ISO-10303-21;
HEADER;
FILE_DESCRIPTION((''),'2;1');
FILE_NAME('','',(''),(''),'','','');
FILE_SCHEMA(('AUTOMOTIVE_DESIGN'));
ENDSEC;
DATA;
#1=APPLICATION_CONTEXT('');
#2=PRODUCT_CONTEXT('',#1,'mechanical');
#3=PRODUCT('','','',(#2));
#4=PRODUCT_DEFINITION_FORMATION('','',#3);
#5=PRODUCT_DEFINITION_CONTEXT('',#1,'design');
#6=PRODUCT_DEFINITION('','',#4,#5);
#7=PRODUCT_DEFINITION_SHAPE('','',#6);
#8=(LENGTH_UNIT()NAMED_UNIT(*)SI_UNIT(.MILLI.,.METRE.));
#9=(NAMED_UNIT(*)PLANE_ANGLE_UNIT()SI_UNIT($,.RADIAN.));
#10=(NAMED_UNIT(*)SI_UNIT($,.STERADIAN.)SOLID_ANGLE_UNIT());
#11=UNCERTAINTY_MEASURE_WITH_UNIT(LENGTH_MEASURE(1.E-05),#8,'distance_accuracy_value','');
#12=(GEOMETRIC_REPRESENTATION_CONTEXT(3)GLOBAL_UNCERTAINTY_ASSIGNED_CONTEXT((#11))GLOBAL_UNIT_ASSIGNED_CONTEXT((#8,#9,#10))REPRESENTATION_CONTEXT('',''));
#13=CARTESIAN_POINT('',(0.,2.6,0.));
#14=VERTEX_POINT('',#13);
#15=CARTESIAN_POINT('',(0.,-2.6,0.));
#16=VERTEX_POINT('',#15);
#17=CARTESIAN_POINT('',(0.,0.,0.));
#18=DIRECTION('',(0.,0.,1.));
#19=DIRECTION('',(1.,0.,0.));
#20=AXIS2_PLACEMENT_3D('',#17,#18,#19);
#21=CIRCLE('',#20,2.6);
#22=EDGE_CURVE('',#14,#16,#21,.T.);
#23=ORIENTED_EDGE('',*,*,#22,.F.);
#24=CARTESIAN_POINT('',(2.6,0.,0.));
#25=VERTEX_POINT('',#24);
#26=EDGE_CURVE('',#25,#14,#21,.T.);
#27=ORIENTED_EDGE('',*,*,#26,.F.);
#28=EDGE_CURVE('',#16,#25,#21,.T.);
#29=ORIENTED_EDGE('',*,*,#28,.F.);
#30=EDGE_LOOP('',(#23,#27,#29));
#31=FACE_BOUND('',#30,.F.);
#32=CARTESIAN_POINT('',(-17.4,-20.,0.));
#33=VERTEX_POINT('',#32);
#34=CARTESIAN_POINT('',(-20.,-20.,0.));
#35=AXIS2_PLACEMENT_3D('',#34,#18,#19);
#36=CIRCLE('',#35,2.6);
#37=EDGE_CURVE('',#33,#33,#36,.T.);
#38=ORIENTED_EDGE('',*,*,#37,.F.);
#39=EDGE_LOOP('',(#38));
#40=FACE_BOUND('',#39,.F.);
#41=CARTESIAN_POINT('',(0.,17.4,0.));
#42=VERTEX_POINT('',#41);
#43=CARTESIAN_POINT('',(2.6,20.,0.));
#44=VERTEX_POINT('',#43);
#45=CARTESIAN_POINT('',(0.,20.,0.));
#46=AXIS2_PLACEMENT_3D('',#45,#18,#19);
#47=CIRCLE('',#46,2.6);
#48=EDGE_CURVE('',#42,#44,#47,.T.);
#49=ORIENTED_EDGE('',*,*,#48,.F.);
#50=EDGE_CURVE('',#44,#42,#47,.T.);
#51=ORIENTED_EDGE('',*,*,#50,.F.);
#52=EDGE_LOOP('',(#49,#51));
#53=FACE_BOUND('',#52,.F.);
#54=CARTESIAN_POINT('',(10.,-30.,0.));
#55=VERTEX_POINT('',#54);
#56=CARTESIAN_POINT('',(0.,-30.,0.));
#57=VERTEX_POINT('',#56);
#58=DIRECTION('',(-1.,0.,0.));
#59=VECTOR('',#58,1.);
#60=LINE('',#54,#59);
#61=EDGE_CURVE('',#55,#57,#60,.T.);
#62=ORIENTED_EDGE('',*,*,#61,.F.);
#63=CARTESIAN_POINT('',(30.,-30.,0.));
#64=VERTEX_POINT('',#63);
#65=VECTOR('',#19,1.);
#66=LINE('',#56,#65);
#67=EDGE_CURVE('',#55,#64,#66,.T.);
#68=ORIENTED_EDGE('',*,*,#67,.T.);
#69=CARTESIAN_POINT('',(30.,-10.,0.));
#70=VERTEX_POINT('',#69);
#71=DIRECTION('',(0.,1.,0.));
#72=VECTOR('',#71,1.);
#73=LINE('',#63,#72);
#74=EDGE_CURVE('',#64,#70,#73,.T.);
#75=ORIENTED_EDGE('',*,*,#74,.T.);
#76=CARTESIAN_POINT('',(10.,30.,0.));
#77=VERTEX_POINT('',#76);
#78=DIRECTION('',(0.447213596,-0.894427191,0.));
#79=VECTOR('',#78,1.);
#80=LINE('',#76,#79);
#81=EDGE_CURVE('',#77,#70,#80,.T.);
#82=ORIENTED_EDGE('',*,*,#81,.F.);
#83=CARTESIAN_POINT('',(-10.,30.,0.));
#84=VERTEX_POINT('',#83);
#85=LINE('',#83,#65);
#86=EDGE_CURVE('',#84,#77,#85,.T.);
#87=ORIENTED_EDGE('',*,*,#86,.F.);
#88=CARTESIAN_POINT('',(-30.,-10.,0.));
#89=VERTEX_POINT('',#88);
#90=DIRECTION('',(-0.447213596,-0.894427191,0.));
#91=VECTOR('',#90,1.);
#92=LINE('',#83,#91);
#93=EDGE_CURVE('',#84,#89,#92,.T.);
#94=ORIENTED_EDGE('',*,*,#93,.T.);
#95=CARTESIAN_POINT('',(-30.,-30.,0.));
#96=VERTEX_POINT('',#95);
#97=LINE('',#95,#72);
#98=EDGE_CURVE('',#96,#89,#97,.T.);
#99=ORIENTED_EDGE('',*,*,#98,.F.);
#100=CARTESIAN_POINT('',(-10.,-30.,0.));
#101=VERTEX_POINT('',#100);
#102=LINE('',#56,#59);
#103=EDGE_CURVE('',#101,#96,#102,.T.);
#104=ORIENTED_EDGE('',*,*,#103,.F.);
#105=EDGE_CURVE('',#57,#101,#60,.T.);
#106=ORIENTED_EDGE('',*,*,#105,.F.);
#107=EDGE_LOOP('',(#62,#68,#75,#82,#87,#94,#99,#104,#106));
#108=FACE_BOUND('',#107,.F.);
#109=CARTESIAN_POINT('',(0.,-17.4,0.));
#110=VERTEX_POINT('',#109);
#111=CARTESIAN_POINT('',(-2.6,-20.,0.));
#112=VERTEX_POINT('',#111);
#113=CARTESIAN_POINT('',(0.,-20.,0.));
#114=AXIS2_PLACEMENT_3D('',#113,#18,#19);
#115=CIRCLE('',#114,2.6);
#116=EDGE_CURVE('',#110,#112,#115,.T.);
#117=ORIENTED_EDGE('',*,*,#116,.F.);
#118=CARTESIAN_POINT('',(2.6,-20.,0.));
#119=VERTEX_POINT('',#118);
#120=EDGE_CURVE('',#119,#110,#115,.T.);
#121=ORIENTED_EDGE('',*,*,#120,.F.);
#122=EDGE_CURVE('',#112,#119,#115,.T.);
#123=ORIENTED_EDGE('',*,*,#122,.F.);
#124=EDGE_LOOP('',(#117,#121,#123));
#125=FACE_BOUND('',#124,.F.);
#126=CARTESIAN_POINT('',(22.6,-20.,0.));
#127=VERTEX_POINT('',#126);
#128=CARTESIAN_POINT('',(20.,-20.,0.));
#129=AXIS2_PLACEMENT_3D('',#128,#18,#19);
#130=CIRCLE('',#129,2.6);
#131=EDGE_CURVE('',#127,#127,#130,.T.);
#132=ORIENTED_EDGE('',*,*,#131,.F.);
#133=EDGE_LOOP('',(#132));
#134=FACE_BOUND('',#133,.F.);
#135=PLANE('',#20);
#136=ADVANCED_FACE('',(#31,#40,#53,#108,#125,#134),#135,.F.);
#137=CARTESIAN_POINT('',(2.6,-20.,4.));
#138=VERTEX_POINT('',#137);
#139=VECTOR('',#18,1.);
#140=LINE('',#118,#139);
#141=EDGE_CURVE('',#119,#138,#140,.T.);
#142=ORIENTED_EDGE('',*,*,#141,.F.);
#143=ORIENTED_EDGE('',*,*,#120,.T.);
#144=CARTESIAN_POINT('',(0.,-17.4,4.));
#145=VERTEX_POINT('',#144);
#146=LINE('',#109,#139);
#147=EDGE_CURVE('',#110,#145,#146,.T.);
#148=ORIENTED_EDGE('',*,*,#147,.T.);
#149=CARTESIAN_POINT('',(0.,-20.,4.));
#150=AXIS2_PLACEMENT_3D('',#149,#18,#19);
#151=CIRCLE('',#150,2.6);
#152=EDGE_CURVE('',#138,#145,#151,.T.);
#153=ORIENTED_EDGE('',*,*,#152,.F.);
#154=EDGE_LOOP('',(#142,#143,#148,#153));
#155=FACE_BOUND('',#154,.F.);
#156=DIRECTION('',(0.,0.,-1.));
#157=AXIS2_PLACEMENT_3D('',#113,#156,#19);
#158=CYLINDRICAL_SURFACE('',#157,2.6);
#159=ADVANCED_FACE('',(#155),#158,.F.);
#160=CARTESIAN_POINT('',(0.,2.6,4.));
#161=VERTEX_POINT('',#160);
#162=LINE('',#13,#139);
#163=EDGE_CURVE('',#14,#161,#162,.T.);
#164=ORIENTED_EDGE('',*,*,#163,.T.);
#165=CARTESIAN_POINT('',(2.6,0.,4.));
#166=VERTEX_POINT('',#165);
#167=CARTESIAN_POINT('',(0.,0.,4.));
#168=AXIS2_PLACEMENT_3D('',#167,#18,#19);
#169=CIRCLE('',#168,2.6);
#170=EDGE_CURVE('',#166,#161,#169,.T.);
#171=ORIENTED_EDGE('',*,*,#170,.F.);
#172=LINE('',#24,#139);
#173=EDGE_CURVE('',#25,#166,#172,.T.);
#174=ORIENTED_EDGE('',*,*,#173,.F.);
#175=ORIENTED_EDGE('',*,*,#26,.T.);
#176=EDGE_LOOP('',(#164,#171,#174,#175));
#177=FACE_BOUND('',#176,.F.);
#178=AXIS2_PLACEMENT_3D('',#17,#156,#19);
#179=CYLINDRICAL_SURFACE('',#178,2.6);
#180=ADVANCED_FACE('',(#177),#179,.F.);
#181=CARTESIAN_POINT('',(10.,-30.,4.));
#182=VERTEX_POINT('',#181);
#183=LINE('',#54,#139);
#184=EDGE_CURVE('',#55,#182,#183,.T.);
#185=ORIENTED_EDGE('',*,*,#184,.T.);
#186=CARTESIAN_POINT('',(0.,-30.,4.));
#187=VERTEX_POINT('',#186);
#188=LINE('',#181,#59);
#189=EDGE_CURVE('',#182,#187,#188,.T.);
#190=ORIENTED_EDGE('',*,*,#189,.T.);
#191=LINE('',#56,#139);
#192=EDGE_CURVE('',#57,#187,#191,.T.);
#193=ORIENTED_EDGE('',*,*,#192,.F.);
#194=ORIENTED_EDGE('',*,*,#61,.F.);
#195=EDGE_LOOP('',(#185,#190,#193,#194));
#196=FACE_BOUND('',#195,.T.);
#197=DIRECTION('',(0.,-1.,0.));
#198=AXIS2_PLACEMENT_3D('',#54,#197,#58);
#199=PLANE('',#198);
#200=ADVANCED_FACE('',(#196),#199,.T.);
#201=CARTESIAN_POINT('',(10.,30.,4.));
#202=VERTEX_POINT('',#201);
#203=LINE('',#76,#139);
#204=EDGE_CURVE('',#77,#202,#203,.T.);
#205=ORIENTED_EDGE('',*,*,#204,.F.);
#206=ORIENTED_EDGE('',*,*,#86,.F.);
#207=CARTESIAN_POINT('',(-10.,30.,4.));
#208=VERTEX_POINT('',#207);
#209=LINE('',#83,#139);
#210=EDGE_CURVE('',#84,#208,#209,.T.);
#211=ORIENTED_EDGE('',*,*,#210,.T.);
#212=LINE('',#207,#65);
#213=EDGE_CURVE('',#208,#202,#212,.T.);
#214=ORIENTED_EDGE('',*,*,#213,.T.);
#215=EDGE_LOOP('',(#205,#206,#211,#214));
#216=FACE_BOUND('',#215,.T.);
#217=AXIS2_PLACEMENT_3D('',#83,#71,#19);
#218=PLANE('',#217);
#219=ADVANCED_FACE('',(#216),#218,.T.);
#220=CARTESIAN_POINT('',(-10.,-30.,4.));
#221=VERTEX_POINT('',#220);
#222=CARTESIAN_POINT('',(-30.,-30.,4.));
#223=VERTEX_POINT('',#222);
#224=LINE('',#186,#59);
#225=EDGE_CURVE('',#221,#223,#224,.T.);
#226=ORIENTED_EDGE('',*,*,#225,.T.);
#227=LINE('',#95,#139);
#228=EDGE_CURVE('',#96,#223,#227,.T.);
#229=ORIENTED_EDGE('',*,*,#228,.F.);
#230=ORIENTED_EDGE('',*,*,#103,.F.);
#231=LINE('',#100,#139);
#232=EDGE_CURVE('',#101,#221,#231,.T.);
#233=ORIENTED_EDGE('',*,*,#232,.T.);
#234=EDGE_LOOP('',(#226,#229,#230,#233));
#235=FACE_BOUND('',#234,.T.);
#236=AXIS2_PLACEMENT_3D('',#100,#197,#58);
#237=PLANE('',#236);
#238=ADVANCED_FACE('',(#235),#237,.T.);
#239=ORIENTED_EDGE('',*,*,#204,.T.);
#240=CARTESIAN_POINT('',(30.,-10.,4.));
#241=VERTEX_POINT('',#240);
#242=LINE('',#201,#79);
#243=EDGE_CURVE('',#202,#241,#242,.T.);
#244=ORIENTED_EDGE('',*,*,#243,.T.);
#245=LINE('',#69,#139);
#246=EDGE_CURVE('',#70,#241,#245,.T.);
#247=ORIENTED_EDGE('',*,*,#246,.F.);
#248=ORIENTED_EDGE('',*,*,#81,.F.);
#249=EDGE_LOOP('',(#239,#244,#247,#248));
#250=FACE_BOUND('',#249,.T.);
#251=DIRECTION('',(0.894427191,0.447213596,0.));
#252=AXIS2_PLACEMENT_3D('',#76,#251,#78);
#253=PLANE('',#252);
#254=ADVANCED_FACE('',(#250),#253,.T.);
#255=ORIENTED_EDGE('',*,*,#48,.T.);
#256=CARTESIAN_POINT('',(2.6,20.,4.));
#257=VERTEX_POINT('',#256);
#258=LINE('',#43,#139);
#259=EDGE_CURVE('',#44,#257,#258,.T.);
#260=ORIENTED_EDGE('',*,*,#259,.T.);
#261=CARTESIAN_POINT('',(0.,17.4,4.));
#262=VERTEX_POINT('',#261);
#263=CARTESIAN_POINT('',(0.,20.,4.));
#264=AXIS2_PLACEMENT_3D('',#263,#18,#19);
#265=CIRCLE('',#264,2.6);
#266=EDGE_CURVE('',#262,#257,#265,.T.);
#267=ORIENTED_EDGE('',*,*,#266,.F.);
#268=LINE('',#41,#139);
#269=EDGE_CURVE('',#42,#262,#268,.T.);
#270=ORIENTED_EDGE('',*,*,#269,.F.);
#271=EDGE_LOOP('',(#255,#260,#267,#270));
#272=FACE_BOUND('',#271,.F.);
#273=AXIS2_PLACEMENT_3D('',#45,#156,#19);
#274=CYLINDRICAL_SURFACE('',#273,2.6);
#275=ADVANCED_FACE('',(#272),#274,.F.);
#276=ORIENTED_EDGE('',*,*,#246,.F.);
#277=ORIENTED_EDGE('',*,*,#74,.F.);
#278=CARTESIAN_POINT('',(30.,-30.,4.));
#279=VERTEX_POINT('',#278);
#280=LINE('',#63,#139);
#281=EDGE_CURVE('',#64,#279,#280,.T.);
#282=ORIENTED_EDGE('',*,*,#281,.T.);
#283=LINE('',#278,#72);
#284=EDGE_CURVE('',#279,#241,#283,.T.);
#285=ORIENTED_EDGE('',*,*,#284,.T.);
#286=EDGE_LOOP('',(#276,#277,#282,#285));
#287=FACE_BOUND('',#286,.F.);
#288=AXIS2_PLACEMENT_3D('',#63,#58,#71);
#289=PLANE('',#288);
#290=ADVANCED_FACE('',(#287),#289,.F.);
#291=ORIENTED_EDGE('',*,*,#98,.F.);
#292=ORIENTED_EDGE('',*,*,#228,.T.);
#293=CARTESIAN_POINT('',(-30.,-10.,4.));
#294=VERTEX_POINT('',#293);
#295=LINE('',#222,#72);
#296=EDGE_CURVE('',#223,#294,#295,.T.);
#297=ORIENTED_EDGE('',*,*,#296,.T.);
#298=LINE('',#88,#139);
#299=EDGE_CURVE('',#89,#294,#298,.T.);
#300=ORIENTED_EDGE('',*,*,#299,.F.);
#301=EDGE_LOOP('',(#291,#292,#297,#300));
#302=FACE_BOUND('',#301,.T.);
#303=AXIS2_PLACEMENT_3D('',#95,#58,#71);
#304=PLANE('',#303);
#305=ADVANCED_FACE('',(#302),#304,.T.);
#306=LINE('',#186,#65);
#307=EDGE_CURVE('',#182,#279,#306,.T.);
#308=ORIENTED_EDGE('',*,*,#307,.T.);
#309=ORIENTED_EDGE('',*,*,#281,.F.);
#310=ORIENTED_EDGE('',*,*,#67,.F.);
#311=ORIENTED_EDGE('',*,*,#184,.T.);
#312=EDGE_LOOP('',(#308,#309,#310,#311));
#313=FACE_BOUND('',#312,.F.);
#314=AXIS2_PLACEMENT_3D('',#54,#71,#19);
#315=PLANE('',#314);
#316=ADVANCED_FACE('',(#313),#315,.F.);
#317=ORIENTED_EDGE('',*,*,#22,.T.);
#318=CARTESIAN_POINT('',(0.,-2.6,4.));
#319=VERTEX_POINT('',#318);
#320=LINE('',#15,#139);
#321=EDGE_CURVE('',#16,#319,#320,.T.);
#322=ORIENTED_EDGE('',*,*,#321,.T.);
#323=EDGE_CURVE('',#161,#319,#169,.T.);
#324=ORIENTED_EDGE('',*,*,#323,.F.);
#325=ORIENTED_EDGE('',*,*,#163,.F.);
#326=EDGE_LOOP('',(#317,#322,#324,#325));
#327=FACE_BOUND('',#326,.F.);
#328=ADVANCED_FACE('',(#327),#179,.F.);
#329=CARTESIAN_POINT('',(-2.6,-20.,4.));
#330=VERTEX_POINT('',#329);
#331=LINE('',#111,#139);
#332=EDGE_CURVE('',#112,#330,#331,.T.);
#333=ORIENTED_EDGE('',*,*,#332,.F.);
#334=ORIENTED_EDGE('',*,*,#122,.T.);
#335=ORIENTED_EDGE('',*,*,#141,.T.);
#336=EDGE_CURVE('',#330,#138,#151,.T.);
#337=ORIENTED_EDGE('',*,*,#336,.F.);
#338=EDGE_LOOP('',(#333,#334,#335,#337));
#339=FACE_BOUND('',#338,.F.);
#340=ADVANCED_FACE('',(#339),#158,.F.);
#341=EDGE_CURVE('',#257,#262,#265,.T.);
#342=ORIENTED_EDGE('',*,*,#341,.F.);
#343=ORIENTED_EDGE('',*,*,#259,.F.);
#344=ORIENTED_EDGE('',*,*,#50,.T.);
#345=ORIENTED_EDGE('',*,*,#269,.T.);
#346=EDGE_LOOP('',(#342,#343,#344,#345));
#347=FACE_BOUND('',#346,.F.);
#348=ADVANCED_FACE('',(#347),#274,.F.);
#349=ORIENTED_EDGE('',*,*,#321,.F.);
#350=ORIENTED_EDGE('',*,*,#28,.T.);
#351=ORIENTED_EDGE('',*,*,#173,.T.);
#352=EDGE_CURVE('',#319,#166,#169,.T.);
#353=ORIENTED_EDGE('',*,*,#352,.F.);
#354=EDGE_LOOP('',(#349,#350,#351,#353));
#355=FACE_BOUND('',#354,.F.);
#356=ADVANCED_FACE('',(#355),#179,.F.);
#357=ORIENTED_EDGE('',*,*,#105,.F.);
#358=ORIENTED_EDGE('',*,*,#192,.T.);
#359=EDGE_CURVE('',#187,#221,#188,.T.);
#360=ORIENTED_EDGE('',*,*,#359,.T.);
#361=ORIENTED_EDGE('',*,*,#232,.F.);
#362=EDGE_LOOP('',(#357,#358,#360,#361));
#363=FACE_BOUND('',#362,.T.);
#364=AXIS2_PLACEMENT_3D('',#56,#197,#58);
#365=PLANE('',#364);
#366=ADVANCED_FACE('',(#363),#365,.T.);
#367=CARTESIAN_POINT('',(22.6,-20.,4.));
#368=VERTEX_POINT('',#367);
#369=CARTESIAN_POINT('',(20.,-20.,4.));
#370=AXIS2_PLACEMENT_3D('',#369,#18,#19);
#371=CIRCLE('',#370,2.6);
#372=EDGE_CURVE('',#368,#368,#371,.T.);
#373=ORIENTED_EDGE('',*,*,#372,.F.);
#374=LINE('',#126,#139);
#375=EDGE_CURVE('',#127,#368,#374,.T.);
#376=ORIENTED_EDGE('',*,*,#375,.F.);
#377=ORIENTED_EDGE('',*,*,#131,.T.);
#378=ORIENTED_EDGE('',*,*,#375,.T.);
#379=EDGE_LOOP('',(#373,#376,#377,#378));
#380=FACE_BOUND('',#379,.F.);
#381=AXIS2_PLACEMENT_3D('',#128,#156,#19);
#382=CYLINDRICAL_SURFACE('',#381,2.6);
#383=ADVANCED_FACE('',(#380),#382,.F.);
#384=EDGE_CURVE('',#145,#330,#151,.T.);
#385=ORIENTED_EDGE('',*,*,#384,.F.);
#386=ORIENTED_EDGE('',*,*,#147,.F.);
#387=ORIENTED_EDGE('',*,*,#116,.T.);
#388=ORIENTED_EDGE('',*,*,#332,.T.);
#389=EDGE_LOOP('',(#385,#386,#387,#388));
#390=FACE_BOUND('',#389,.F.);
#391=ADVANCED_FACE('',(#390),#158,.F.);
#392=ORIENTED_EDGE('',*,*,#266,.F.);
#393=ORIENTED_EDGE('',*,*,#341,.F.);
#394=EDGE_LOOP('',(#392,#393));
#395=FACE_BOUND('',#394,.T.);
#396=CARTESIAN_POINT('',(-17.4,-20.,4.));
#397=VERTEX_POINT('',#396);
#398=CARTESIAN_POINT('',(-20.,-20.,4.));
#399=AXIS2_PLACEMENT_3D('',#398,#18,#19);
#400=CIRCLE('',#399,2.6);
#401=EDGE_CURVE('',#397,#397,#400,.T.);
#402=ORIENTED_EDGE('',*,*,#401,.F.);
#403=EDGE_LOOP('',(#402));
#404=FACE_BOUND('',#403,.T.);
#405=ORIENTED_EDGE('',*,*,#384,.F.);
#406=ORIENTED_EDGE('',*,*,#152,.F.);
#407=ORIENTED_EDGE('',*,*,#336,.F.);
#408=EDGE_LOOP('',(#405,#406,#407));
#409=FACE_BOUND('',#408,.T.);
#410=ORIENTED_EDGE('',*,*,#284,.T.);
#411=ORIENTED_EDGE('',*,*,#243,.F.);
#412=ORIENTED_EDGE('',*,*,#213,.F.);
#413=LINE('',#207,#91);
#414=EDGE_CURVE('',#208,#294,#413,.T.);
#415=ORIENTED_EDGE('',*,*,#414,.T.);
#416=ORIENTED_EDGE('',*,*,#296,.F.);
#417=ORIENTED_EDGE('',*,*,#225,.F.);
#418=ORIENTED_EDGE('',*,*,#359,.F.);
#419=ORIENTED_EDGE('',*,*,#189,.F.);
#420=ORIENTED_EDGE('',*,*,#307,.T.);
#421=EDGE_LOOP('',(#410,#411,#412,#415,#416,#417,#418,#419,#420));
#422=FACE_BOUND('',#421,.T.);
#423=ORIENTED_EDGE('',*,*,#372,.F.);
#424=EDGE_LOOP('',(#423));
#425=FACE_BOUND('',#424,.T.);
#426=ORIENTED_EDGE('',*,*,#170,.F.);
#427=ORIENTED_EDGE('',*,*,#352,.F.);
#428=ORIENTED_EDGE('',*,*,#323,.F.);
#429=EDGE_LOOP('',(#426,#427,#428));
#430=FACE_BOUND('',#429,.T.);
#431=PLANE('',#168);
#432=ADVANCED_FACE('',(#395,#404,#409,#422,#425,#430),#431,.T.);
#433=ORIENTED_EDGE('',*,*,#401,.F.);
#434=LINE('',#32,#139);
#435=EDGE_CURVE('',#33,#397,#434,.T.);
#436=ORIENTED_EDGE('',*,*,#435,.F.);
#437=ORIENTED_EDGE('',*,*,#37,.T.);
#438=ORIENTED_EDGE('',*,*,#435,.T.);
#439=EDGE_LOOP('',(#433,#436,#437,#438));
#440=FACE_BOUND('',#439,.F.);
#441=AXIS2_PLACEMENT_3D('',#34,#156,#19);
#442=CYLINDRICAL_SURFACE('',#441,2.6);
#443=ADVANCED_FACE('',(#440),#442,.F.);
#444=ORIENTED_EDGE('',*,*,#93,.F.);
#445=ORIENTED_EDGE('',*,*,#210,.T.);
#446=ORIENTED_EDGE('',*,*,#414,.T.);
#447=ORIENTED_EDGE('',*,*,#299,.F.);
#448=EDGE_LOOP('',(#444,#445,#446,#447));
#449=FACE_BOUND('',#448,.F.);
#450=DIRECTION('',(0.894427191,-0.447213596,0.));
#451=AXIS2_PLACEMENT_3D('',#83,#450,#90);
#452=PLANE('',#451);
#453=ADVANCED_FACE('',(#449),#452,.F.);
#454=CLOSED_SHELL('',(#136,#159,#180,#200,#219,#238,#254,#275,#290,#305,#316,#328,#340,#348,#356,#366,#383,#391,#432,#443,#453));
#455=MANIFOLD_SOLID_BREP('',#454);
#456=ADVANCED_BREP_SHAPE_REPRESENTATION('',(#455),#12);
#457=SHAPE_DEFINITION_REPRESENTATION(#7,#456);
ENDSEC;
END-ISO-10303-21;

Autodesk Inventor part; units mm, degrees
ref_plane "YZ Plane" through (0, 0, 0) normal (1, 0, 0) x (0, 1, 0)
ref_plane "XZ Plane" through (0, 0, 0) normal (0, 1, 0) x (-1, 0, 0)
ref_plane "XY Plane" through (0, 0, 0) normal (0, 0, 1) x (1, 0, 0)
sketch "Sketch1" plane through (0, 0, 0) normal (0, 0, 1) x (1, 0, 0)
  line L0 (10, -30) -> (-10, -30)
  line L1 (-10, 30) -> (10, 30)
  line L2 (0, -30) -> (-30, -30)
  line L3 (0, -30) -> (30, -30)
  line L4 (30, -30) -> (30, -10)
  line L5 (-30, -30) -> (-30, -10)
  line L6 (-10, 30) -> (-30, -10)
  line L7 (10, 30) -> (30, -10)
  circle A0 centre (0, 0) radius 2.6
  line L8 (0, 0) -> (0, 20)
  line L9 (0, 0) -> (20, 0) construction
  circle A1 centre (0, 20) radius 2.6
  line L10 (0, 0) -> (0, -20)
  circle A2 centre (0, -20) radius 2.6
  line L11 (0, -20) -> (-20, -20)
  line L12 (0, -20) -> (20, -20) construction
  circle A3 centre (-20, -20) radius 2.6
  circle A4 centre (20, -20) radius 2.6
  dimension "d7" = 60
  dimension "d8" = 5.2
  dimension "d9" = 20
  dimension "d10" = 90
  dimension "d11" = 5.2
  dimension "d12" = 20
  dimension "d13" = 5.2
  dimension "d14" = 20
  dimension "d15" = 180
  dimension "d16" = 5.2
  dimension "d17" = 5.2
extrude "Extrusion1" add sketch "Sketch1" along normal blind 4
properties part number "2020 T Plate Bracket Connectors"
